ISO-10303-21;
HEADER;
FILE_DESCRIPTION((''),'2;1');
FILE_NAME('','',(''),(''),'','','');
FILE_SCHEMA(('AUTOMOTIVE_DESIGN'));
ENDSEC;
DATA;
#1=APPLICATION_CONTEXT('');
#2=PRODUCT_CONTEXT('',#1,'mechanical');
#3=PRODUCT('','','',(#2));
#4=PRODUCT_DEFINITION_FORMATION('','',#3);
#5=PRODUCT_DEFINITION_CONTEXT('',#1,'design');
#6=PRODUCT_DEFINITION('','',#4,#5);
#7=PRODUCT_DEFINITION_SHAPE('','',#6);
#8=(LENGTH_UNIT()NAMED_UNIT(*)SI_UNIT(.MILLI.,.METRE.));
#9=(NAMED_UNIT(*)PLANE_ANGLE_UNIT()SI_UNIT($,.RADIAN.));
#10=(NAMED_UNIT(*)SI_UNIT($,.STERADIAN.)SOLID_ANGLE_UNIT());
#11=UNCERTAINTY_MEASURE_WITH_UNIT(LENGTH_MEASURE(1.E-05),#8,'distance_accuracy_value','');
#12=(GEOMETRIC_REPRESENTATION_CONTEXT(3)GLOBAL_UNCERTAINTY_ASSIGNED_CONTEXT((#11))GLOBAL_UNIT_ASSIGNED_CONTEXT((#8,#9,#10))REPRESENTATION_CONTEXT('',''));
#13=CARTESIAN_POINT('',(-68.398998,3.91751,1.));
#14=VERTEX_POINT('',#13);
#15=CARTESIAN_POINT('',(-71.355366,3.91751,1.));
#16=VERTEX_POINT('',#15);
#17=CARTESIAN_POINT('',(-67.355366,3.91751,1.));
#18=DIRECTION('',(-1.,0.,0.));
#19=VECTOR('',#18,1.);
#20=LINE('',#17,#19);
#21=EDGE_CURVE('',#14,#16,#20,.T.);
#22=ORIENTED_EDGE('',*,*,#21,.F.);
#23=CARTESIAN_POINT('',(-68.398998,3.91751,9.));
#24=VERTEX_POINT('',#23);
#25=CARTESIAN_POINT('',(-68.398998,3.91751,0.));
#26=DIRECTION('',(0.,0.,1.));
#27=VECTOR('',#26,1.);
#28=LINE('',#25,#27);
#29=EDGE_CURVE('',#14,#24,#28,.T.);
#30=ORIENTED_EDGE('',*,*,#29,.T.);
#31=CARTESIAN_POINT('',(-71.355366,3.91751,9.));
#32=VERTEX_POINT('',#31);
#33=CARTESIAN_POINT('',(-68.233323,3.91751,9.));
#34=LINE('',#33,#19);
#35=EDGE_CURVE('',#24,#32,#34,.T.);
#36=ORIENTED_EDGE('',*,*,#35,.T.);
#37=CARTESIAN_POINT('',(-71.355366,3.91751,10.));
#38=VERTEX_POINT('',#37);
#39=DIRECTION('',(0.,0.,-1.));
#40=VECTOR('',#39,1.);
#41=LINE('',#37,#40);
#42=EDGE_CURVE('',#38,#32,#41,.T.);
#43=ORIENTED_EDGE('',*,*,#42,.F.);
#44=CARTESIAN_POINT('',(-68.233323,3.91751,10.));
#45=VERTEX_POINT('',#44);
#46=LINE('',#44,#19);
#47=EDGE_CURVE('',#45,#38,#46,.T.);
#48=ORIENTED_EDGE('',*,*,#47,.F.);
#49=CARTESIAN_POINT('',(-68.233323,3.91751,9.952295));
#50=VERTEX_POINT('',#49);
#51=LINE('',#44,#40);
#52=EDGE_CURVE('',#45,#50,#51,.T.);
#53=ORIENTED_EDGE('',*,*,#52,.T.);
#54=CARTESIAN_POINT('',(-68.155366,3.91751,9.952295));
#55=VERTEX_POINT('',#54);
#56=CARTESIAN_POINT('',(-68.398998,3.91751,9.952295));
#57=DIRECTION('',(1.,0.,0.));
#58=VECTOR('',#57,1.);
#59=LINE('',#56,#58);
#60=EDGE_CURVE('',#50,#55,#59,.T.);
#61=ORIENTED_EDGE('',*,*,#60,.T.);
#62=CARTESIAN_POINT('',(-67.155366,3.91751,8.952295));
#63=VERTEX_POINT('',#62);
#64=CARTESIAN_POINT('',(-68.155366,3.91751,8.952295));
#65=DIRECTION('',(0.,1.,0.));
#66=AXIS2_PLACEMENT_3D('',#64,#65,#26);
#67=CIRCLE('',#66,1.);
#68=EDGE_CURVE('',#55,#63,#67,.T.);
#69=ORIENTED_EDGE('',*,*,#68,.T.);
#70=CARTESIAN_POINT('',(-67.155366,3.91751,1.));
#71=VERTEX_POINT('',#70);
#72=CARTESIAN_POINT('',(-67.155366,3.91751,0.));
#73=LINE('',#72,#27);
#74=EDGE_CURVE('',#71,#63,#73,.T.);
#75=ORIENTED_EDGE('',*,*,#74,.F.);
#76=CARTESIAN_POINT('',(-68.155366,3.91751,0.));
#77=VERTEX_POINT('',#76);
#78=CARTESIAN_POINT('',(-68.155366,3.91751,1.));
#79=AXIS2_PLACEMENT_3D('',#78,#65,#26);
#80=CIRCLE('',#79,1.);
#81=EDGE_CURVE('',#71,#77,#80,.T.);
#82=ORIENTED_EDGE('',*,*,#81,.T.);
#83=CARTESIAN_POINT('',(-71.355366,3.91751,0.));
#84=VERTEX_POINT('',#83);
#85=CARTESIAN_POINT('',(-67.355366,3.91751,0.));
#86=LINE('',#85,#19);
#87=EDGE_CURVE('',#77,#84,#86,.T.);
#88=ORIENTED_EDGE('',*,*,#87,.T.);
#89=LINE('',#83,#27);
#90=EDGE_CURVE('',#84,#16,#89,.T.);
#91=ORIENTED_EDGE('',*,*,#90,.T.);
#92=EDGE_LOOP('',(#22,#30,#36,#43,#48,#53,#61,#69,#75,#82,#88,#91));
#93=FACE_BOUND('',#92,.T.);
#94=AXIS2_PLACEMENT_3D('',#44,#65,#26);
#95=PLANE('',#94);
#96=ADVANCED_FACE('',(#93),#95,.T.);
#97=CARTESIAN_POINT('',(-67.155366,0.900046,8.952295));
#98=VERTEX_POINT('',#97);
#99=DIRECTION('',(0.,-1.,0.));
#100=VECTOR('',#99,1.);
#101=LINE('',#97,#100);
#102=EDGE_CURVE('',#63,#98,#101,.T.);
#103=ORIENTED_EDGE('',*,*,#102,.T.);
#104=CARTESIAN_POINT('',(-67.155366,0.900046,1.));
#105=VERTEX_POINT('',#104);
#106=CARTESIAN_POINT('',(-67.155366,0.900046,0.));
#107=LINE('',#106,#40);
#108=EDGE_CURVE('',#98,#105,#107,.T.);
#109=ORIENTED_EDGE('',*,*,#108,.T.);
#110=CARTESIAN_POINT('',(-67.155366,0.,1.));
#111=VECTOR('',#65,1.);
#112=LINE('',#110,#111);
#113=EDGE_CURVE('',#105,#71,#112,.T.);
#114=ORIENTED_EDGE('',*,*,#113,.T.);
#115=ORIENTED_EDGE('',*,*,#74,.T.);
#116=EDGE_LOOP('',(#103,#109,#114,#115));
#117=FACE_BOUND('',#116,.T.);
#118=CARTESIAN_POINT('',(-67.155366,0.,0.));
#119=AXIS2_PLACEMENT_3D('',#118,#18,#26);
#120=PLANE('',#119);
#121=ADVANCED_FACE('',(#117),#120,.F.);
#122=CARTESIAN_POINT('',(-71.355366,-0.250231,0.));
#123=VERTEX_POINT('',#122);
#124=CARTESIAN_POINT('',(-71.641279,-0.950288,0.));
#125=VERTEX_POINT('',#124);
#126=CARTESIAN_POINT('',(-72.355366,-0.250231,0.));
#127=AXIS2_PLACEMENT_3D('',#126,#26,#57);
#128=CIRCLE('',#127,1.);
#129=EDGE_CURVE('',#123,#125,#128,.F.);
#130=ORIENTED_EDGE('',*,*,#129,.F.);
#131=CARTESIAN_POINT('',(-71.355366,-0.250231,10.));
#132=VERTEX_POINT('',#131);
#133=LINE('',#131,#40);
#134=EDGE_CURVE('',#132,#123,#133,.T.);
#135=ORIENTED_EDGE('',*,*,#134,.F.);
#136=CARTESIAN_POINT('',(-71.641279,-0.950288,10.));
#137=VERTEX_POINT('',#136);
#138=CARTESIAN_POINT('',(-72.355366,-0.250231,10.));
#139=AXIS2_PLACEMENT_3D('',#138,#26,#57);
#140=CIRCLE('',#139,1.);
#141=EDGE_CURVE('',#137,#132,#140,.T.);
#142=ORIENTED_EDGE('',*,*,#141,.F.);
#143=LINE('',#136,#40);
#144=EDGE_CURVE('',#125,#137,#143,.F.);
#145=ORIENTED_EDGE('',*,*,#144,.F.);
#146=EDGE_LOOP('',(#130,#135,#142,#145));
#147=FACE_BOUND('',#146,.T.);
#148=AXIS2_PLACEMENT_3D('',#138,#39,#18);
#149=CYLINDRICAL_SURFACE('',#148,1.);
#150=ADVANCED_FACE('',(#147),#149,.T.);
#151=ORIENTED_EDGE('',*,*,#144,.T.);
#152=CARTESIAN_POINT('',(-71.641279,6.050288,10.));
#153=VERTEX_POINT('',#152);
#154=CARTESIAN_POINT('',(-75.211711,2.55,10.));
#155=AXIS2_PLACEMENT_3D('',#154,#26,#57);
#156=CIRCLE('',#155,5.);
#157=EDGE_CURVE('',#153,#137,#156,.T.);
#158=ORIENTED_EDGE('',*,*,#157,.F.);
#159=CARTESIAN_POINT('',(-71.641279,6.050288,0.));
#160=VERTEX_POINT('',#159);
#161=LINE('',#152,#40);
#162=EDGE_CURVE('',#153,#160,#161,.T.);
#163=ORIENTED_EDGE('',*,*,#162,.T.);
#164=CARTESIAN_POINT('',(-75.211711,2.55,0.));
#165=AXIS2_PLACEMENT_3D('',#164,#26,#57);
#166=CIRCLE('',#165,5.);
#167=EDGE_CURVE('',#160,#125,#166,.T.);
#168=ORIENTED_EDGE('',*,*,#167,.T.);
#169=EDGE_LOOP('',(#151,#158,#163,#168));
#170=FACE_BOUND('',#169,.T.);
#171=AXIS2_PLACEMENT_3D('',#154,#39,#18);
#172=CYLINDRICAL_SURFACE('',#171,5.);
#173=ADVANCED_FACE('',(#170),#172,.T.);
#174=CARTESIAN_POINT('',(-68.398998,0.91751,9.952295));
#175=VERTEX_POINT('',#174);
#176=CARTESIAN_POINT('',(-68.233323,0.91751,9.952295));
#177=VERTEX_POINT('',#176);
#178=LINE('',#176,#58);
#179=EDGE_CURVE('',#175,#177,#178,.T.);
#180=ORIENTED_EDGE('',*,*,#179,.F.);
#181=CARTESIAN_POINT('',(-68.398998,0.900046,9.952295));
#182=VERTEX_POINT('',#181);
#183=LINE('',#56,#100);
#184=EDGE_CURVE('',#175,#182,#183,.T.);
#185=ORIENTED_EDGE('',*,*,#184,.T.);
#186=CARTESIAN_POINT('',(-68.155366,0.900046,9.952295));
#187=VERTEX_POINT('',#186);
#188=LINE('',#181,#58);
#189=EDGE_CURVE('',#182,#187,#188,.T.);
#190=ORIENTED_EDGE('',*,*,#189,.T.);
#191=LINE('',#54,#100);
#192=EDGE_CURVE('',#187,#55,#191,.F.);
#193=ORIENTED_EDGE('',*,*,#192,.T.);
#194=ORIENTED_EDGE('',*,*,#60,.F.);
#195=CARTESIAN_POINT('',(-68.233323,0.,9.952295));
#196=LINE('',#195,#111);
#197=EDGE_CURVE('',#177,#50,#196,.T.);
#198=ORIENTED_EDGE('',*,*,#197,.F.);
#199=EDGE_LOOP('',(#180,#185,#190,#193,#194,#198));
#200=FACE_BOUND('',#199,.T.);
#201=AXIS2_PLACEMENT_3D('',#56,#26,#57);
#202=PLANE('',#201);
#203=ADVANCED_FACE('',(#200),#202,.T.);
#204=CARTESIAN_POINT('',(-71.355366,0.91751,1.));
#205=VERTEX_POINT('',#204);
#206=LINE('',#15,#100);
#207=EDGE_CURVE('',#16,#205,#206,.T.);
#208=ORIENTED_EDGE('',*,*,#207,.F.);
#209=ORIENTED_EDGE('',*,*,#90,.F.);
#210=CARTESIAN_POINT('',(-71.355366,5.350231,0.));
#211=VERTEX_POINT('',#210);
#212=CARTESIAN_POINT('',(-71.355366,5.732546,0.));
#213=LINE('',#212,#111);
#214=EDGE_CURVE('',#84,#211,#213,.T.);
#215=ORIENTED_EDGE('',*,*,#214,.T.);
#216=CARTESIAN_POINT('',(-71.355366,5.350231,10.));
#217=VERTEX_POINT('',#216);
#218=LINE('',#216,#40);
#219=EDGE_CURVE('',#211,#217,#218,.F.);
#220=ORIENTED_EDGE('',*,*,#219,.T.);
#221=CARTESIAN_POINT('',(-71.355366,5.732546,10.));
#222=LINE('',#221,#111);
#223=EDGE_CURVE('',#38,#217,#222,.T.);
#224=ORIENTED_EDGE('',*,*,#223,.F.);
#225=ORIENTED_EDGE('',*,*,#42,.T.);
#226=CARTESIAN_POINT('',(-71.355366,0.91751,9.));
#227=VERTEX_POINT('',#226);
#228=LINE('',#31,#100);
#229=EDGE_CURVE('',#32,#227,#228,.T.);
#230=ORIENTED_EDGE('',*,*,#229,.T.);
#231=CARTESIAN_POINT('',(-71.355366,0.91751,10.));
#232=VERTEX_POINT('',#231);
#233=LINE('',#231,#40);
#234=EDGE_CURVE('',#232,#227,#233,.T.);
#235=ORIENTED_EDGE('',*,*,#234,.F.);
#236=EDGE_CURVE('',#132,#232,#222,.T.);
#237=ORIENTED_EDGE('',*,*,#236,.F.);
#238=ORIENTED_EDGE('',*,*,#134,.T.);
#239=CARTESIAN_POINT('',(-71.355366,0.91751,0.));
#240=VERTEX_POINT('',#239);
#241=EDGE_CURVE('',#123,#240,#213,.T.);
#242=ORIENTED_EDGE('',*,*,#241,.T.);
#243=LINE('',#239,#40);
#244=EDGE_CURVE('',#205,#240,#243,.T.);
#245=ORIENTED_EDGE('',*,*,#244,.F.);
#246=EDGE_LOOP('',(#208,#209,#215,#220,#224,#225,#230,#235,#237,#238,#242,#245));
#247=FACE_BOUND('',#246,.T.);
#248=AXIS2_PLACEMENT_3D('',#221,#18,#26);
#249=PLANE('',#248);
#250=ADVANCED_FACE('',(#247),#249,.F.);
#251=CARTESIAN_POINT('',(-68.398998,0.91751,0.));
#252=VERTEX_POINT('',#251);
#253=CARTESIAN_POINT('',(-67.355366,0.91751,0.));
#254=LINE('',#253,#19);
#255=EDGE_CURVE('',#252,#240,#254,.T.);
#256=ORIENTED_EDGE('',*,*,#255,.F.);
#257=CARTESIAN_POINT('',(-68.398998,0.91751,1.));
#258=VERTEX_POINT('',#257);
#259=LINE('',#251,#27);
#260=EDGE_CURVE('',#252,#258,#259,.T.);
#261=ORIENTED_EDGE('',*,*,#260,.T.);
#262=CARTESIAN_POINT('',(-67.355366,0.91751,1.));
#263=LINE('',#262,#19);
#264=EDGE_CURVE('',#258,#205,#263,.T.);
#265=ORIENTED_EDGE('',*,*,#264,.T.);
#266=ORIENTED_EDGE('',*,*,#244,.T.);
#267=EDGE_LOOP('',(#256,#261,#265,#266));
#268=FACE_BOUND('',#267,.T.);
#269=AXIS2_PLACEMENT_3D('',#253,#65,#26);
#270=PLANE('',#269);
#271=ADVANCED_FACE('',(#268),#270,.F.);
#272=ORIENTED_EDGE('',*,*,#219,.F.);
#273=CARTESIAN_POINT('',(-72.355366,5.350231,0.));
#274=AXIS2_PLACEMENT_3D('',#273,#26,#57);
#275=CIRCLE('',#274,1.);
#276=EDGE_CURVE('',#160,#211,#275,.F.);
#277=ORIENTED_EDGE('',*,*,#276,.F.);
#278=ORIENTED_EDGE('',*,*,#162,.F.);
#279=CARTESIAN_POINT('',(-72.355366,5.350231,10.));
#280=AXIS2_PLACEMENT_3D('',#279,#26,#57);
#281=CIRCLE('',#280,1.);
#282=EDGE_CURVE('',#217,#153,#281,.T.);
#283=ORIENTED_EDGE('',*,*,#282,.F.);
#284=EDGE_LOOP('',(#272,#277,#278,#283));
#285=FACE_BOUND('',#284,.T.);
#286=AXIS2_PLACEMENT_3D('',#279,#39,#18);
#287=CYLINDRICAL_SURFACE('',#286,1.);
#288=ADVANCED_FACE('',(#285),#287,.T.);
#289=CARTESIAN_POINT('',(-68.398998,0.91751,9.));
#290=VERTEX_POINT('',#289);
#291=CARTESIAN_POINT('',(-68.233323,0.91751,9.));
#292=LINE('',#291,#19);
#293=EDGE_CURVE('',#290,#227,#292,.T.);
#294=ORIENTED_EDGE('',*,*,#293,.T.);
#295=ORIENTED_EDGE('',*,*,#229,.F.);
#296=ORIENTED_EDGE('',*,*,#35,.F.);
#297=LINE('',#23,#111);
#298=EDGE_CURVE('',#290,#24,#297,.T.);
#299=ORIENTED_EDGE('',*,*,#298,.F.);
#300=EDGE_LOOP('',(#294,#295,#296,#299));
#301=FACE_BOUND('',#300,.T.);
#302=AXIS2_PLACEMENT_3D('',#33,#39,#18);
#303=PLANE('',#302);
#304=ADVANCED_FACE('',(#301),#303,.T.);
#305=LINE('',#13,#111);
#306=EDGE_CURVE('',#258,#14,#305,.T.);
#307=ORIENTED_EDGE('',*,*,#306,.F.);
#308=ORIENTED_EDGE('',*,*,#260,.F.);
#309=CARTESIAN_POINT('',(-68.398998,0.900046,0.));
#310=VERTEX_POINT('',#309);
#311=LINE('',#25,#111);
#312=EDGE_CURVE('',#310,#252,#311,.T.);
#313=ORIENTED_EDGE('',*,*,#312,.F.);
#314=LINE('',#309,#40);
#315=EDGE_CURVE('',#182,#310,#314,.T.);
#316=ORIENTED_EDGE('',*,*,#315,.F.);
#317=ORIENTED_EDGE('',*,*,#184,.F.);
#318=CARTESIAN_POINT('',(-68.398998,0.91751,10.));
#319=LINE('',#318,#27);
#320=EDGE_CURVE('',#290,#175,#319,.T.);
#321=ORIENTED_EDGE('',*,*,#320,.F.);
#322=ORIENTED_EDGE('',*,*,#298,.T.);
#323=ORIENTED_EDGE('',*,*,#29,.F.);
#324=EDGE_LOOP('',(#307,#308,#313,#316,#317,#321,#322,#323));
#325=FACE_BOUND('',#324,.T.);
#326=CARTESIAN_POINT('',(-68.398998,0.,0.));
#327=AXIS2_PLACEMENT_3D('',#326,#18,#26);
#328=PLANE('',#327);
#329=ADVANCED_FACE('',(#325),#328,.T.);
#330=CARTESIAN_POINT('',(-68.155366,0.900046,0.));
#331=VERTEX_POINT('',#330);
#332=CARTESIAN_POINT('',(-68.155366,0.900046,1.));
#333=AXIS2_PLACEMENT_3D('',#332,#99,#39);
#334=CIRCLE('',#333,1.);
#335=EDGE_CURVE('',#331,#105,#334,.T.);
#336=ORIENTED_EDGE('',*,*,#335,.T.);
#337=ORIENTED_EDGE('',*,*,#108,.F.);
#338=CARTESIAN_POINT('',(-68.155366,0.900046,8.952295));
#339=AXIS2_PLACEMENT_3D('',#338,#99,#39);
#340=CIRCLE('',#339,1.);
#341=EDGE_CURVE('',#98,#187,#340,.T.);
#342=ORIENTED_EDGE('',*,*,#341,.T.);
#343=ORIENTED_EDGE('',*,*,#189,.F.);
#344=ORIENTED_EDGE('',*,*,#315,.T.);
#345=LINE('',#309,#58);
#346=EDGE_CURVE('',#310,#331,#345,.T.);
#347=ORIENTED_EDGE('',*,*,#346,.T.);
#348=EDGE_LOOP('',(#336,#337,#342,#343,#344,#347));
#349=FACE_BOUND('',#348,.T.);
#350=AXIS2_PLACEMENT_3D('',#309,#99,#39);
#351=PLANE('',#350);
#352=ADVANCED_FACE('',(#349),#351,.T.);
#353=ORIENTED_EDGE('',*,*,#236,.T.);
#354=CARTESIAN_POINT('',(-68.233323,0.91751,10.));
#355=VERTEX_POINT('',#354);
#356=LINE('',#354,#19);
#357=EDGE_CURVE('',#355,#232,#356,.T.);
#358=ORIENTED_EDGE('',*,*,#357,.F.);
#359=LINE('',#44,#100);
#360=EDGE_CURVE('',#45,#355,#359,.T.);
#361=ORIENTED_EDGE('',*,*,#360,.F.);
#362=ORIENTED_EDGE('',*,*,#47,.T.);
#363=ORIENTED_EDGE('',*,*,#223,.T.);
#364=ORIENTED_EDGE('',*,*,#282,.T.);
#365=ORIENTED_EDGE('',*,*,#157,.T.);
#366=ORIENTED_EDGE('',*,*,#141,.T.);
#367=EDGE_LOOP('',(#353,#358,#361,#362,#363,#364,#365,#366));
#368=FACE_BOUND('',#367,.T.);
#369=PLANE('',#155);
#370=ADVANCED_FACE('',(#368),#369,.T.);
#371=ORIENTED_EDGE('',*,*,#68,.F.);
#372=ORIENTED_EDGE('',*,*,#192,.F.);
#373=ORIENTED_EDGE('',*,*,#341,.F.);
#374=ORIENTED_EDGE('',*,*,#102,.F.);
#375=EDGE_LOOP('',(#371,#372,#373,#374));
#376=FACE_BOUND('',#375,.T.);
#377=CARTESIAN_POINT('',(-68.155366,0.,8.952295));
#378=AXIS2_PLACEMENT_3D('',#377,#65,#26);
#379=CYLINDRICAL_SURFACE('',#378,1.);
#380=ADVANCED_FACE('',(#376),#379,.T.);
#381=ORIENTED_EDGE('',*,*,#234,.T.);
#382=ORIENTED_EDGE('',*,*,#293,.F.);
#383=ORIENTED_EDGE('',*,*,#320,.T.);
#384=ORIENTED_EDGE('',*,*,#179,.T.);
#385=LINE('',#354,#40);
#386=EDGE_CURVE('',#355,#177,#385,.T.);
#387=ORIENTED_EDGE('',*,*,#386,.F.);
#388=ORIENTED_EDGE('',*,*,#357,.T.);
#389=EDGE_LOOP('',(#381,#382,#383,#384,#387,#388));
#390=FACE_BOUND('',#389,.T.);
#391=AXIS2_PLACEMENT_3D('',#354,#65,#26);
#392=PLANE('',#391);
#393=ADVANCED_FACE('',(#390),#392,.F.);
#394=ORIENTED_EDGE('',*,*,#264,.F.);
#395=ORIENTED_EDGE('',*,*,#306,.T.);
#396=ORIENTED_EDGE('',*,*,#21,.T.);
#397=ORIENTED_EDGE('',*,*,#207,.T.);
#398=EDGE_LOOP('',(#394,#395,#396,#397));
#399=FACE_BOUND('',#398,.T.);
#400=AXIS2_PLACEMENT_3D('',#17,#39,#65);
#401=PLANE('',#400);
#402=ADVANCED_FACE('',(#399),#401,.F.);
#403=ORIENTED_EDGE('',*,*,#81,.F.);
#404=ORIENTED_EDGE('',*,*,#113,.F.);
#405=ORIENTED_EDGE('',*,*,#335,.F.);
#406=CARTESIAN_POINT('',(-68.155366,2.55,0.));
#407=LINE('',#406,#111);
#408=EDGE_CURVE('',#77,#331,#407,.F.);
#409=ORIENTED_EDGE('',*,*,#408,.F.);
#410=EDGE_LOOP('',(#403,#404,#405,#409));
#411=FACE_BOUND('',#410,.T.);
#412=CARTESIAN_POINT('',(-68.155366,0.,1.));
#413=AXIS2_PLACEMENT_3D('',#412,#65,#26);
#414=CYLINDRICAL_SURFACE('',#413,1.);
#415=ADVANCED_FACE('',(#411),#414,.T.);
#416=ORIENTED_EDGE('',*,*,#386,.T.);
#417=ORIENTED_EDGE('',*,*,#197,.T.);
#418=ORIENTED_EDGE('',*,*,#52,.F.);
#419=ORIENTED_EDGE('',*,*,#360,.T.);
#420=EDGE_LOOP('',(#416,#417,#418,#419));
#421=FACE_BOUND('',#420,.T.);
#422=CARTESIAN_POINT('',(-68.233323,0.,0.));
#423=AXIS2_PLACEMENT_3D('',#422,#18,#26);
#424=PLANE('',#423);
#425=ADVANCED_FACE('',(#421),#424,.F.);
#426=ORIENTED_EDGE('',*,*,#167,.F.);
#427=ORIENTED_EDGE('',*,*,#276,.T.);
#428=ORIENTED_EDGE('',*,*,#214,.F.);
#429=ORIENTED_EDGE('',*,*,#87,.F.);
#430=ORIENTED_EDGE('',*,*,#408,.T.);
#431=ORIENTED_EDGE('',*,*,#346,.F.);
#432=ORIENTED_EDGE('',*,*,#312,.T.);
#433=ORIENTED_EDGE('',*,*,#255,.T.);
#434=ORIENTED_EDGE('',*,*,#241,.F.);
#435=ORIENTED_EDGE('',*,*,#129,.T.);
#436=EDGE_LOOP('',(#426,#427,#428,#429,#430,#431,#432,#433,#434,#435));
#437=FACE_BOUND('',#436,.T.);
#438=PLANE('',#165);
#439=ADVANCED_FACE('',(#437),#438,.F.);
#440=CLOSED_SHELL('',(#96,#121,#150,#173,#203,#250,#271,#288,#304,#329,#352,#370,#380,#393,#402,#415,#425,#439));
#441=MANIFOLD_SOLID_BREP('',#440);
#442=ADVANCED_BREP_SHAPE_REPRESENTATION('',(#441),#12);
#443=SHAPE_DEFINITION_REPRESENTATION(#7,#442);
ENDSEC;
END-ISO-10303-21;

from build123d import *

# Parameters (mm, degrees)
SKETCH_1_R            = 5
EXTRUDE_1_DEPTH       = 10
SKETCH_9_W            = 7.120641766
SKETCH_9_H            = 4.534999238
EXTRUDE_6_DEPTH       = 1
SKETCH_11_W           = 1.257653538
SKETCH_11_H           = 9
EXTRUDE_7_DEPTH       = 4.5
EXTRUDE_8_DEPTH       = 6
FILLET_8_R            = 1
FILLET_9_R            = 1
CUT_EXTRUDE_1_DEPTH   = 10
SKETCH_14_W           = 1
SKETCH_14_H           = 3
EXTRUDE_9_DEPTH       = 3.122043073
SKETCH_15_W           = 1
SKETCH_15_H           = 3
EXTRUDE_10_DEPTH      = 4
EXTRUDE_11_DEPTH      = 0.2
EXTRUDE_11_DEPTH_BACK = 1.043632387
SKETCH_16_W           = 9.952294967
SKETCH_16_H           = 3.01746433
FILLET_11_R           = 1
FILLET_12_R           = 1
FILLET_13_R           = 1
FILLET_14_R           = 1


with BuildPart() as part:
    # 草圖1 → 填料-伸長1 (new body)
    with BuildSketch(Plane(origin=(0.382706605, 0, 0), x_dir=(1, 0, 0), z_dir=(0, 0, 1))):
        with Locations((-75.594417438, 2.55)):
            Circle(SKETCH_1_R)
    extrude(amount=EXTRUDE_1_DEPTH)

    # 草圖9 → 填料-伸長6 (add)
    with BuildSketch(Plane(origin=(6.127831546, 0, 9), x_dir=(1, 0, 0), z_dir=(0, 0, 1))):
        with Locations((-75.644850643, 2.267499619)):
            Rectangle(SKETCH_9_W, SKETCH_9_H)
    extrude(amount=EXTRUDE_6_DEPTH)



with BuildPart() as body_2:
    # 草圖11 → 填料-伸長7 (new body)
    with BuildSketch(Plane(origin=(9.574526933, 4.534999238, 0.48426017), x_dir=(1, 0, 0), z_dir=(0, 1, 0))):
        with Locations((-76.184774061, -4.5)):
            Rectangle(SKETCH_11_W, SKETCH_11_H)
    extrude(amount=-EXTRUDE_7_DEPTH)


with BuildPart() as part_1:
    add(part.part)

    add(body_2.part)  # 填料-伸長8 merges body 2
    # 草圖12 → 填料-伸長8 (add)
    with BuildSketch(Plane.ZY.offset(67.239073897)):
        Polygon((0.48426017, 4.534999238), (0.48426017, 0), (1.483647509, 0.034999238), (1.483647509, 4.534999238), align=None)
    extrude(amount=EXTRUDE_8_DEPTH)

    # 圓角8
    fillet_8_edges = [part_1.edges().sort_by_distance(p)[0] for p in [
        (-65.981420359, 2.284999238, 0.48426017),
    ]]
    fillet(fillet_8_edges, radius=FILLET_8_R)

    # 圓角9
    fillet_9_edges = [part_1.edges().sort_by_distance(p)[0] for p in [
        (-65.956698214, 2.267499619, 10),
    ]]
    fillet(fillet_9_edges, radius=FILLET_9_R - 0.0001)  # a hair under: the kernel refuses the full size

    # 草圖13 → 除料-伸長1 (cut)
    with BuildSketch(Plane(origin=(0, 0, 0), x_dir=(-1, 0, 0), z_dir=(0, 0, -1))):
        with BuildLine():
            Line((71.355365605, 5.732546384), (71.355365605, -0.632546384))
            ThreePointArc((71.355365605, -0.632546384), (70.211710833, 2.55), (71.355365605, 5.732546384))
        make_face()
    extrude(amount=-CUT_EXTRUDE_1_DEPTH, mode=Mode.SUBTRACT)


with BuildPart() as body_2_2:
    # of the pieces the cut leaves, the one that is kept (cut_extrude_1_keep)
    add(part_1.part.solids().sort_by_distance((-71.355365605, 5.732546384, 0))[0])

    # 草圖14 → 填料-伸長9 (add)
    with BuildSketch(Plane(origin=(-71.355365605, 0, 0), x_dir=(0, 0, -1), z_dir=(1, 0, 0))):
        with Locations((-9.5, 2.417510407)):
            Rectangle(SKETCH_14_W, SKETCH_14_H)
    extrude(amount=EXTRUDE_9_DEPTH)

    # 草圖15 → 填料-伸長10 (add)
    with BuildSketch(Plane(origin=(-71.355365605, 0, 0), x_dir=(0, 0, -1), z_dir=(1, 0, 0))):
        with Locations((-0.5, 2.417510407)):
            Rectangle(SKETCH_15_W, SKETCH_15_H)
    extrude(amount=EXTRUDE_10_DEPTH)

    # 草圖16 → 填料-伸長11 (add, two sides: drawn at the far end of the back side and taken through both)
    with BuildSketch(Plane(origin=(-67.355365605, 0, 0), x_dir=(0, 0, -1), z_dir=(1, 0, 0)).offset(-EXTRUDE_11_DEPTH_BACK)):
        with Locations((-4.976147484, 2.408778242)):
            Rectangle(SKETCH_16_W, SKETCH_16_H)
    extrude(amount=EXTRUDE_11_DEPTH + EXTRUDE_11_DEPTH_BACK)

    # 圓角11
    fillet_11_edges = [body_2_2.edges().sort_by_distance(p)[0] for p in [
        (-67.155365605, 2.408778242, 0),
    ]]
    fillet(fillet_11_edges, radius=FILLET_11_R)

    # 圓角12
    fillet_12_edges = [body_2_2.edges().sort_by_distance(p)[0] for p in [
        (-67.155365605, 2.408778242, 9.952294967),
    ]]
    fillet(fillet_12_edges, radius=FILLET_12_R)

    # 圓角13
    fillet_13_edges = [body_2_2.edges().sort_by_distance(p)[0] for p in [
        (-71.355365605, 5.732546384, 5),
    ]]
    fillet(fillet_13_edges, radius=FILLET_13_R)

    # 圓角14
    fillet_14_edges = [body_2_2.edges().sort_by_distance(p)[0] for p in [
        (-71.355365605, -0.632546384, 5),
    ]]
    fillet(fillet_14_edges, radius=FILLET_14_R)


solid = body_2_2.part
